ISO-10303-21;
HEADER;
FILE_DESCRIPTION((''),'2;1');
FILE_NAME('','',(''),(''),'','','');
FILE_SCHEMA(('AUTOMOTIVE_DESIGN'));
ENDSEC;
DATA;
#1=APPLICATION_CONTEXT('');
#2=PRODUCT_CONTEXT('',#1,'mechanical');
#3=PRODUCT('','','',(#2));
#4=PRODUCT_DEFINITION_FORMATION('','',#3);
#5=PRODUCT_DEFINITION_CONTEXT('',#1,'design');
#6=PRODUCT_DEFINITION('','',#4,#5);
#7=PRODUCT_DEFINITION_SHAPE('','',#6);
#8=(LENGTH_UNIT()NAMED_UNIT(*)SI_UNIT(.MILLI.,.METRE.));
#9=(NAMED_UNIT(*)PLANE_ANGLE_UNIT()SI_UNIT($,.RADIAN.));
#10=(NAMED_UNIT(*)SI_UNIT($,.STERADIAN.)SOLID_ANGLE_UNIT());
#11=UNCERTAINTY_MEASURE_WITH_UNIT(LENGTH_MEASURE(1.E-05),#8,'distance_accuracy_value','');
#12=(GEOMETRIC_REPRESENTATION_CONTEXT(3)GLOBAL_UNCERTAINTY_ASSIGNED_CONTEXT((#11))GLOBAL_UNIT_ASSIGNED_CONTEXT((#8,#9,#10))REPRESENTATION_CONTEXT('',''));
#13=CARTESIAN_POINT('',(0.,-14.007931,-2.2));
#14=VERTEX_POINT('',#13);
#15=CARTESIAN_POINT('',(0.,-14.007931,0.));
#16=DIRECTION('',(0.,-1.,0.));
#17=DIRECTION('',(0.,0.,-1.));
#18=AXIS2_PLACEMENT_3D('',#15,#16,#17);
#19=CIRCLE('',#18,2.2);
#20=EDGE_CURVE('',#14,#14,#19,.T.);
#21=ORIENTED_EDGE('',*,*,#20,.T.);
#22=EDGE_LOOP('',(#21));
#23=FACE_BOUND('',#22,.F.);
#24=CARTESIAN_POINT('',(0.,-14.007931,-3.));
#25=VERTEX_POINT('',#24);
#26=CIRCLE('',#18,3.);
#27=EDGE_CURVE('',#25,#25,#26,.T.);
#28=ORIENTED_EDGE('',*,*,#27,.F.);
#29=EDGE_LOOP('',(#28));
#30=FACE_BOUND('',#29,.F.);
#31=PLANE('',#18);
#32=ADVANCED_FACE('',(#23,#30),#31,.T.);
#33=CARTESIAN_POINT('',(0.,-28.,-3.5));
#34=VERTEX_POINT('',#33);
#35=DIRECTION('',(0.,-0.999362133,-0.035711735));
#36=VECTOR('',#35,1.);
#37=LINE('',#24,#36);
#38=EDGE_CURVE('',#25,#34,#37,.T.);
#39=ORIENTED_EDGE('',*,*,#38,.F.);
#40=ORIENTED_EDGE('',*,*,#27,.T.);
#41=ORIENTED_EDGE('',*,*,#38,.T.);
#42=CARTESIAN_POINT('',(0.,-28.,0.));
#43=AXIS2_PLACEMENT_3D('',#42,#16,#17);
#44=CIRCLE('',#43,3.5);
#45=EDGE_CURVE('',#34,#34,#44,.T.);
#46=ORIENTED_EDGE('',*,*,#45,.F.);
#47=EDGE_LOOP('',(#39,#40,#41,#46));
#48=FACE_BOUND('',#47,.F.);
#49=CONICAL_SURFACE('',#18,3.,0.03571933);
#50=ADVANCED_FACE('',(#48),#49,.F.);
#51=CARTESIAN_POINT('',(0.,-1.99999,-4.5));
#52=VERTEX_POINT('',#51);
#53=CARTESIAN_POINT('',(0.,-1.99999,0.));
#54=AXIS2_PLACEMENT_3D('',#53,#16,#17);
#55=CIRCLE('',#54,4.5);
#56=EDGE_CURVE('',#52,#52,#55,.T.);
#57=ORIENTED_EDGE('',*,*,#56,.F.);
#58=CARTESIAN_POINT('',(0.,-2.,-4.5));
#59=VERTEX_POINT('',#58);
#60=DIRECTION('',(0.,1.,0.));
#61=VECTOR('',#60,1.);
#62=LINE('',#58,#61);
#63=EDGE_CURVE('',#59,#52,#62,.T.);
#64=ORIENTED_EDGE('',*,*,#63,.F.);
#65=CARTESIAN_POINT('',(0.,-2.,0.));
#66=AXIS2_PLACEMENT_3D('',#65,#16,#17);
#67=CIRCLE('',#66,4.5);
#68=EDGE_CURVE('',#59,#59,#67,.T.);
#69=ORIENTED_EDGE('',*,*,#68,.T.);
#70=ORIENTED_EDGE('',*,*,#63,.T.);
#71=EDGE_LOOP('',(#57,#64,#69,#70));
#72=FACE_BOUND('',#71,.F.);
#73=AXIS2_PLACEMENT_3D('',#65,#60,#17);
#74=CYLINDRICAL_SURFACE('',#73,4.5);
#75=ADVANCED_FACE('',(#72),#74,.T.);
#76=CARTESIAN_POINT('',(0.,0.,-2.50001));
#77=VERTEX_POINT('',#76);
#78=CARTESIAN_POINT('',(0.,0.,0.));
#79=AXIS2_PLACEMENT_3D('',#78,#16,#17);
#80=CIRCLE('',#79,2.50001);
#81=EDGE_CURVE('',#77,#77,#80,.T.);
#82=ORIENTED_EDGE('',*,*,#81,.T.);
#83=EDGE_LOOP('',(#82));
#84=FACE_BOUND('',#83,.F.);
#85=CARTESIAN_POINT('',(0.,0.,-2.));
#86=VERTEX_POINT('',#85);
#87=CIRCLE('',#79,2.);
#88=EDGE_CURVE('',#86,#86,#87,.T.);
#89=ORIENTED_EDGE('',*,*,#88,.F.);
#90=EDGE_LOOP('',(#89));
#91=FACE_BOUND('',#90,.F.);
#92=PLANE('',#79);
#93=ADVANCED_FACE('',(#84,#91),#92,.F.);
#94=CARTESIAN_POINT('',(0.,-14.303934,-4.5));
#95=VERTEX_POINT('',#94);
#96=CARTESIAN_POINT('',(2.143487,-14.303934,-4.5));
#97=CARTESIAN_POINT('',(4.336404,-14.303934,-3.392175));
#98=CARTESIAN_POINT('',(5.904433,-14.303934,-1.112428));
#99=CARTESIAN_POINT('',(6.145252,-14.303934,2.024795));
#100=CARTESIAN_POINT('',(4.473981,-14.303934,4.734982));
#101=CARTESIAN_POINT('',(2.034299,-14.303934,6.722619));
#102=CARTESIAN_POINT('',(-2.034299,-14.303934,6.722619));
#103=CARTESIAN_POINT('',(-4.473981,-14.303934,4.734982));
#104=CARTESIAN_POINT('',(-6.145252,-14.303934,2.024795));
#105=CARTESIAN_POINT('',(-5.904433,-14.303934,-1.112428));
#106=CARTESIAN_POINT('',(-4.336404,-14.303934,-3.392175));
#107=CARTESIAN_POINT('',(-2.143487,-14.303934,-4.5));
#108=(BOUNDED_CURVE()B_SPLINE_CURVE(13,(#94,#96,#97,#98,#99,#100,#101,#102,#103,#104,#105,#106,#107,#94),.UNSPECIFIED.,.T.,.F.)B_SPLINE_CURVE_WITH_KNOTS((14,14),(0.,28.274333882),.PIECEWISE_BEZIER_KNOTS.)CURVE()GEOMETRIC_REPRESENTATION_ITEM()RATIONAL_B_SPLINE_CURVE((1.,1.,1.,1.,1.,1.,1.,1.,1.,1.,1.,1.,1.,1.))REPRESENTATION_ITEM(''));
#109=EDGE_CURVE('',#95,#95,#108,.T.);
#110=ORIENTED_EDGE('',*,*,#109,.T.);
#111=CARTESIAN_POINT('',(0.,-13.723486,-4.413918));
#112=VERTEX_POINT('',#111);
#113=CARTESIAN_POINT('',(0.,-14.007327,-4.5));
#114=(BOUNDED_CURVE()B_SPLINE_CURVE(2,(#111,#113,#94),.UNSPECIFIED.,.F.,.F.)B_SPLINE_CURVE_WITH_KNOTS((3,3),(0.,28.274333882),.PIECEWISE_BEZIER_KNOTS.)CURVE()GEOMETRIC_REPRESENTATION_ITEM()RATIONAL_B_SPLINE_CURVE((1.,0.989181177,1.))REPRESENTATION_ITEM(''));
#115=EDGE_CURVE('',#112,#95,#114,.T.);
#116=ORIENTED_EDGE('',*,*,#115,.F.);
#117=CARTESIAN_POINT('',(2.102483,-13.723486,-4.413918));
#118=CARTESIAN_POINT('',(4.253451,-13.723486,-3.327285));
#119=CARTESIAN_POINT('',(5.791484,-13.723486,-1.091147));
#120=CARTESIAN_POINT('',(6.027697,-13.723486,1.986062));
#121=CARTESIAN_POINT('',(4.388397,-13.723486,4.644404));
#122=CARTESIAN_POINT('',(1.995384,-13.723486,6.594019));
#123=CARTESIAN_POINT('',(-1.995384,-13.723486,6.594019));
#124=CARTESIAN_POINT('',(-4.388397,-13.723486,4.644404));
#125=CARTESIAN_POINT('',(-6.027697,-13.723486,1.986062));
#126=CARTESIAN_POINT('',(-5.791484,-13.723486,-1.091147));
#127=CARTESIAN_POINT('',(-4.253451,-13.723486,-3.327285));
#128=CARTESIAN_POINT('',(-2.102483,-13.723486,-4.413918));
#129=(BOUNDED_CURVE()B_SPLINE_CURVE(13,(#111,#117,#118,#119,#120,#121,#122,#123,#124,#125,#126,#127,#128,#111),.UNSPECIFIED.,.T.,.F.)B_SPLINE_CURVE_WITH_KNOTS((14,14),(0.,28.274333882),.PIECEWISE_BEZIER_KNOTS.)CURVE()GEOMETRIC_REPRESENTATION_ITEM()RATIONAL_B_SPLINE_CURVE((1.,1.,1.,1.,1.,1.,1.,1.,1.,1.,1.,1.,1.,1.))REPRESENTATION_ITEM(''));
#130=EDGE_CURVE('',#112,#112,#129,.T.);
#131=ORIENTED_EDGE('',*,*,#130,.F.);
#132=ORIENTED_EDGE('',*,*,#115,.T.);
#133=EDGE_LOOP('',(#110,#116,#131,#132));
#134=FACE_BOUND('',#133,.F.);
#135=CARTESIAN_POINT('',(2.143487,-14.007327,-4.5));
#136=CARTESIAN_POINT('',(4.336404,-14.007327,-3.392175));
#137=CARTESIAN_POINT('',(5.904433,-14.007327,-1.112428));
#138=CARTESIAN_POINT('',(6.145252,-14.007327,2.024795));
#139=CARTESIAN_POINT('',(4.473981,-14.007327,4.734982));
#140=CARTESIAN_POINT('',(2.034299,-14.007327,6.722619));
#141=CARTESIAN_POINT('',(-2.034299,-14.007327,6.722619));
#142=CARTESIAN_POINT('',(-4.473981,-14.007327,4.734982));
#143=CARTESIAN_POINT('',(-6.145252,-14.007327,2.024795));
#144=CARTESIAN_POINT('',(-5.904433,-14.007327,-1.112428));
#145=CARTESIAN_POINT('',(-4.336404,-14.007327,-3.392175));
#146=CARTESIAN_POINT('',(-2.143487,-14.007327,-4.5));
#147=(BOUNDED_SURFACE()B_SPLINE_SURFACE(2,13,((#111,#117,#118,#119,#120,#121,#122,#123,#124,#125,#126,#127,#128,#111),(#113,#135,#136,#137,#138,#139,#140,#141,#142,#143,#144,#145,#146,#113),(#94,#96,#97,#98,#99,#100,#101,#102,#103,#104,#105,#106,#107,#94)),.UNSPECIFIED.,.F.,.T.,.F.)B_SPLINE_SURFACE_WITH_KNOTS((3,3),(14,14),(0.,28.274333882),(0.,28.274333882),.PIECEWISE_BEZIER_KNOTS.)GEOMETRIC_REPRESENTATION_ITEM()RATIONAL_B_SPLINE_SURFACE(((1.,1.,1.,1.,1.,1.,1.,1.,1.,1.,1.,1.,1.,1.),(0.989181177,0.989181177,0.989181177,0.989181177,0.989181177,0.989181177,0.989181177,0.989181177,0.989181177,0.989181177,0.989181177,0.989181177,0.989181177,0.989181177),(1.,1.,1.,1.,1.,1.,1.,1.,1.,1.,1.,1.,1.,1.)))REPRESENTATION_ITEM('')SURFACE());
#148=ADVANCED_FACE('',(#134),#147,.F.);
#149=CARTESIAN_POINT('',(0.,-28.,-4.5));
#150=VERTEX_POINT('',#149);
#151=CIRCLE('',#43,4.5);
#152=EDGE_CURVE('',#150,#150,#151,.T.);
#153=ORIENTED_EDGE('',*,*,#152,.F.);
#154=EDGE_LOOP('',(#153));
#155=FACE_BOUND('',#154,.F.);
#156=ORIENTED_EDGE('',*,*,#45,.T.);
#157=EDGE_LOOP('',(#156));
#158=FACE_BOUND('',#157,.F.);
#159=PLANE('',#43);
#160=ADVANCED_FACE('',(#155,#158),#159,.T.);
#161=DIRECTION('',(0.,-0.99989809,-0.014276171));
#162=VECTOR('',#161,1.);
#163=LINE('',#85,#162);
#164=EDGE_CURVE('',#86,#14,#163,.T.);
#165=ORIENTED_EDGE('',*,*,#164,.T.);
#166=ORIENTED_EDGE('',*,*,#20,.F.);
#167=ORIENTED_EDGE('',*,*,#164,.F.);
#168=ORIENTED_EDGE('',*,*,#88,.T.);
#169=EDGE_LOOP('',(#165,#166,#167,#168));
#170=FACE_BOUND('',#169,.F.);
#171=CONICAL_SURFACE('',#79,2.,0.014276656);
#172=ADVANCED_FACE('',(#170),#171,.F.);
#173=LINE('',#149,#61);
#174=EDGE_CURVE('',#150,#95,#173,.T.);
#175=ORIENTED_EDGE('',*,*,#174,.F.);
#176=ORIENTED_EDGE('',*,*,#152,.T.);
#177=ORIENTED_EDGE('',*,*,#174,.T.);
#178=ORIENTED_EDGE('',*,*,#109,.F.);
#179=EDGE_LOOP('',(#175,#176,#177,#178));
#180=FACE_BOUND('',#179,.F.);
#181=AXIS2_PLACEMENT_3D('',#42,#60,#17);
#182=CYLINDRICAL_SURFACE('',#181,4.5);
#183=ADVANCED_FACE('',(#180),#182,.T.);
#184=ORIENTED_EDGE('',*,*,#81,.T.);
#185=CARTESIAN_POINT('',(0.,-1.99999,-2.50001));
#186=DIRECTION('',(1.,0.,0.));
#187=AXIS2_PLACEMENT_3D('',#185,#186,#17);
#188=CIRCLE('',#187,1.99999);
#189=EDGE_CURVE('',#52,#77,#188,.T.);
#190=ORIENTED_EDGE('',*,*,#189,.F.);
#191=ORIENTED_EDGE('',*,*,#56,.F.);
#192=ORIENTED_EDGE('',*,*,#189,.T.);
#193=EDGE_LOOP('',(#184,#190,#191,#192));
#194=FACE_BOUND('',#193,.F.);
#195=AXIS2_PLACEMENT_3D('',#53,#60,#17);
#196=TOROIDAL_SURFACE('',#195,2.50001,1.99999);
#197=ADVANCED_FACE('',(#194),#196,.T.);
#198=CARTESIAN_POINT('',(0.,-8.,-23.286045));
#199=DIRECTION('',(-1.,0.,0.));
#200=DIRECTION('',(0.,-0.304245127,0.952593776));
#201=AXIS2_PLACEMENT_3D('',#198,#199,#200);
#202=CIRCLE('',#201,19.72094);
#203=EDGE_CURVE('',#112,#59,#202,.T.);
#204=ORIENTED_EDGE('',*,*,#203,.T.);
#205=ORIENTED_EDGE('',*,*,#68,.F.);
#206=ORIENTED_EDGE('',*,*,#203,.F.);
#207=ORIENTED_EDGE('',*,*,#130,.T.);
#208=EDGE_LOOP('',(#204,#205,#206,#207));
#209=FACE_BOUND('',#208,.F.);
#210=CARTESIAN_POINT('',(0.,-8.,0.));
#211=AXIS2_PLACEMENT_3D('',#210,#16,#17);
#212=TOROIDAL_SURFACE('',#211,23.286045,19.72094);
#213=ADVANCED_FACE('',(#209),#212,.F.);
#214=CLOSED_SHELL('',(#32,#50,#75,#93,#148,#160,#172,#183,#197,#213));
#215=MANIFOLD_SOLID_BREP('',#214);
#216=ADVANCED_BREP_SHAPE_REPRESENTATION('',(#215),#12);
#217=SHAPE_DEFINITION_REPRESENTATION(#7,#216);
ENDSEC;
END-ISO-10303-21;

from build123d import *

# Parameters (mm, degrees)
F2_R = 1.99999
F3_R = 2


# Not quite as in the source:
# - a fillet or chamfer is up to 0.001 mm smaller than in the source, because OpenCascade refuses the exact size


with BuildPart() as f1:
    # F0 (on Right) → F1 (revolve)
    with BuildSketch(Plane.YZ):
        with BuildLine():
            Line((-2, -4.5), (0, -4.5))
            Line((0, -4.5), (0, -2))
            Line((0, -2), (-14.007930782, -2.2))
            Line((-14.007930782, -2.2), (-14.007930782, -3))
            Line((-14.007930782, -3), (-28, -3.5))
            Line((-28, -3.5), (-28, -4.5))
            Line((-28, -4.5), (-14, -4.5))
            ThreePointArc((-14, -4.5), (-8, -3.5651046907), (-2, -4.5))
        make_face()
    revolve(axis=Axis((0, -15.99, 0), (0, -1, 0)))

    # F2 (radius 2 in the source; OpenCascade refuses exactly that, so slightly less here)
    f2_edges = [f1.edges().sort_by_distance(p)[0] for p in [
        (0, 0, 4.5),
    ]]
    fillet(f2_edges, radius=F2_R)

    # F3
    f3_edges = [f1.edges().sort_by_distance(p)[0] for p in [
        (0, -14, 4.5),
    ]]
    fillet(f3_edges, radius=F3_R)


solid = f1.part
